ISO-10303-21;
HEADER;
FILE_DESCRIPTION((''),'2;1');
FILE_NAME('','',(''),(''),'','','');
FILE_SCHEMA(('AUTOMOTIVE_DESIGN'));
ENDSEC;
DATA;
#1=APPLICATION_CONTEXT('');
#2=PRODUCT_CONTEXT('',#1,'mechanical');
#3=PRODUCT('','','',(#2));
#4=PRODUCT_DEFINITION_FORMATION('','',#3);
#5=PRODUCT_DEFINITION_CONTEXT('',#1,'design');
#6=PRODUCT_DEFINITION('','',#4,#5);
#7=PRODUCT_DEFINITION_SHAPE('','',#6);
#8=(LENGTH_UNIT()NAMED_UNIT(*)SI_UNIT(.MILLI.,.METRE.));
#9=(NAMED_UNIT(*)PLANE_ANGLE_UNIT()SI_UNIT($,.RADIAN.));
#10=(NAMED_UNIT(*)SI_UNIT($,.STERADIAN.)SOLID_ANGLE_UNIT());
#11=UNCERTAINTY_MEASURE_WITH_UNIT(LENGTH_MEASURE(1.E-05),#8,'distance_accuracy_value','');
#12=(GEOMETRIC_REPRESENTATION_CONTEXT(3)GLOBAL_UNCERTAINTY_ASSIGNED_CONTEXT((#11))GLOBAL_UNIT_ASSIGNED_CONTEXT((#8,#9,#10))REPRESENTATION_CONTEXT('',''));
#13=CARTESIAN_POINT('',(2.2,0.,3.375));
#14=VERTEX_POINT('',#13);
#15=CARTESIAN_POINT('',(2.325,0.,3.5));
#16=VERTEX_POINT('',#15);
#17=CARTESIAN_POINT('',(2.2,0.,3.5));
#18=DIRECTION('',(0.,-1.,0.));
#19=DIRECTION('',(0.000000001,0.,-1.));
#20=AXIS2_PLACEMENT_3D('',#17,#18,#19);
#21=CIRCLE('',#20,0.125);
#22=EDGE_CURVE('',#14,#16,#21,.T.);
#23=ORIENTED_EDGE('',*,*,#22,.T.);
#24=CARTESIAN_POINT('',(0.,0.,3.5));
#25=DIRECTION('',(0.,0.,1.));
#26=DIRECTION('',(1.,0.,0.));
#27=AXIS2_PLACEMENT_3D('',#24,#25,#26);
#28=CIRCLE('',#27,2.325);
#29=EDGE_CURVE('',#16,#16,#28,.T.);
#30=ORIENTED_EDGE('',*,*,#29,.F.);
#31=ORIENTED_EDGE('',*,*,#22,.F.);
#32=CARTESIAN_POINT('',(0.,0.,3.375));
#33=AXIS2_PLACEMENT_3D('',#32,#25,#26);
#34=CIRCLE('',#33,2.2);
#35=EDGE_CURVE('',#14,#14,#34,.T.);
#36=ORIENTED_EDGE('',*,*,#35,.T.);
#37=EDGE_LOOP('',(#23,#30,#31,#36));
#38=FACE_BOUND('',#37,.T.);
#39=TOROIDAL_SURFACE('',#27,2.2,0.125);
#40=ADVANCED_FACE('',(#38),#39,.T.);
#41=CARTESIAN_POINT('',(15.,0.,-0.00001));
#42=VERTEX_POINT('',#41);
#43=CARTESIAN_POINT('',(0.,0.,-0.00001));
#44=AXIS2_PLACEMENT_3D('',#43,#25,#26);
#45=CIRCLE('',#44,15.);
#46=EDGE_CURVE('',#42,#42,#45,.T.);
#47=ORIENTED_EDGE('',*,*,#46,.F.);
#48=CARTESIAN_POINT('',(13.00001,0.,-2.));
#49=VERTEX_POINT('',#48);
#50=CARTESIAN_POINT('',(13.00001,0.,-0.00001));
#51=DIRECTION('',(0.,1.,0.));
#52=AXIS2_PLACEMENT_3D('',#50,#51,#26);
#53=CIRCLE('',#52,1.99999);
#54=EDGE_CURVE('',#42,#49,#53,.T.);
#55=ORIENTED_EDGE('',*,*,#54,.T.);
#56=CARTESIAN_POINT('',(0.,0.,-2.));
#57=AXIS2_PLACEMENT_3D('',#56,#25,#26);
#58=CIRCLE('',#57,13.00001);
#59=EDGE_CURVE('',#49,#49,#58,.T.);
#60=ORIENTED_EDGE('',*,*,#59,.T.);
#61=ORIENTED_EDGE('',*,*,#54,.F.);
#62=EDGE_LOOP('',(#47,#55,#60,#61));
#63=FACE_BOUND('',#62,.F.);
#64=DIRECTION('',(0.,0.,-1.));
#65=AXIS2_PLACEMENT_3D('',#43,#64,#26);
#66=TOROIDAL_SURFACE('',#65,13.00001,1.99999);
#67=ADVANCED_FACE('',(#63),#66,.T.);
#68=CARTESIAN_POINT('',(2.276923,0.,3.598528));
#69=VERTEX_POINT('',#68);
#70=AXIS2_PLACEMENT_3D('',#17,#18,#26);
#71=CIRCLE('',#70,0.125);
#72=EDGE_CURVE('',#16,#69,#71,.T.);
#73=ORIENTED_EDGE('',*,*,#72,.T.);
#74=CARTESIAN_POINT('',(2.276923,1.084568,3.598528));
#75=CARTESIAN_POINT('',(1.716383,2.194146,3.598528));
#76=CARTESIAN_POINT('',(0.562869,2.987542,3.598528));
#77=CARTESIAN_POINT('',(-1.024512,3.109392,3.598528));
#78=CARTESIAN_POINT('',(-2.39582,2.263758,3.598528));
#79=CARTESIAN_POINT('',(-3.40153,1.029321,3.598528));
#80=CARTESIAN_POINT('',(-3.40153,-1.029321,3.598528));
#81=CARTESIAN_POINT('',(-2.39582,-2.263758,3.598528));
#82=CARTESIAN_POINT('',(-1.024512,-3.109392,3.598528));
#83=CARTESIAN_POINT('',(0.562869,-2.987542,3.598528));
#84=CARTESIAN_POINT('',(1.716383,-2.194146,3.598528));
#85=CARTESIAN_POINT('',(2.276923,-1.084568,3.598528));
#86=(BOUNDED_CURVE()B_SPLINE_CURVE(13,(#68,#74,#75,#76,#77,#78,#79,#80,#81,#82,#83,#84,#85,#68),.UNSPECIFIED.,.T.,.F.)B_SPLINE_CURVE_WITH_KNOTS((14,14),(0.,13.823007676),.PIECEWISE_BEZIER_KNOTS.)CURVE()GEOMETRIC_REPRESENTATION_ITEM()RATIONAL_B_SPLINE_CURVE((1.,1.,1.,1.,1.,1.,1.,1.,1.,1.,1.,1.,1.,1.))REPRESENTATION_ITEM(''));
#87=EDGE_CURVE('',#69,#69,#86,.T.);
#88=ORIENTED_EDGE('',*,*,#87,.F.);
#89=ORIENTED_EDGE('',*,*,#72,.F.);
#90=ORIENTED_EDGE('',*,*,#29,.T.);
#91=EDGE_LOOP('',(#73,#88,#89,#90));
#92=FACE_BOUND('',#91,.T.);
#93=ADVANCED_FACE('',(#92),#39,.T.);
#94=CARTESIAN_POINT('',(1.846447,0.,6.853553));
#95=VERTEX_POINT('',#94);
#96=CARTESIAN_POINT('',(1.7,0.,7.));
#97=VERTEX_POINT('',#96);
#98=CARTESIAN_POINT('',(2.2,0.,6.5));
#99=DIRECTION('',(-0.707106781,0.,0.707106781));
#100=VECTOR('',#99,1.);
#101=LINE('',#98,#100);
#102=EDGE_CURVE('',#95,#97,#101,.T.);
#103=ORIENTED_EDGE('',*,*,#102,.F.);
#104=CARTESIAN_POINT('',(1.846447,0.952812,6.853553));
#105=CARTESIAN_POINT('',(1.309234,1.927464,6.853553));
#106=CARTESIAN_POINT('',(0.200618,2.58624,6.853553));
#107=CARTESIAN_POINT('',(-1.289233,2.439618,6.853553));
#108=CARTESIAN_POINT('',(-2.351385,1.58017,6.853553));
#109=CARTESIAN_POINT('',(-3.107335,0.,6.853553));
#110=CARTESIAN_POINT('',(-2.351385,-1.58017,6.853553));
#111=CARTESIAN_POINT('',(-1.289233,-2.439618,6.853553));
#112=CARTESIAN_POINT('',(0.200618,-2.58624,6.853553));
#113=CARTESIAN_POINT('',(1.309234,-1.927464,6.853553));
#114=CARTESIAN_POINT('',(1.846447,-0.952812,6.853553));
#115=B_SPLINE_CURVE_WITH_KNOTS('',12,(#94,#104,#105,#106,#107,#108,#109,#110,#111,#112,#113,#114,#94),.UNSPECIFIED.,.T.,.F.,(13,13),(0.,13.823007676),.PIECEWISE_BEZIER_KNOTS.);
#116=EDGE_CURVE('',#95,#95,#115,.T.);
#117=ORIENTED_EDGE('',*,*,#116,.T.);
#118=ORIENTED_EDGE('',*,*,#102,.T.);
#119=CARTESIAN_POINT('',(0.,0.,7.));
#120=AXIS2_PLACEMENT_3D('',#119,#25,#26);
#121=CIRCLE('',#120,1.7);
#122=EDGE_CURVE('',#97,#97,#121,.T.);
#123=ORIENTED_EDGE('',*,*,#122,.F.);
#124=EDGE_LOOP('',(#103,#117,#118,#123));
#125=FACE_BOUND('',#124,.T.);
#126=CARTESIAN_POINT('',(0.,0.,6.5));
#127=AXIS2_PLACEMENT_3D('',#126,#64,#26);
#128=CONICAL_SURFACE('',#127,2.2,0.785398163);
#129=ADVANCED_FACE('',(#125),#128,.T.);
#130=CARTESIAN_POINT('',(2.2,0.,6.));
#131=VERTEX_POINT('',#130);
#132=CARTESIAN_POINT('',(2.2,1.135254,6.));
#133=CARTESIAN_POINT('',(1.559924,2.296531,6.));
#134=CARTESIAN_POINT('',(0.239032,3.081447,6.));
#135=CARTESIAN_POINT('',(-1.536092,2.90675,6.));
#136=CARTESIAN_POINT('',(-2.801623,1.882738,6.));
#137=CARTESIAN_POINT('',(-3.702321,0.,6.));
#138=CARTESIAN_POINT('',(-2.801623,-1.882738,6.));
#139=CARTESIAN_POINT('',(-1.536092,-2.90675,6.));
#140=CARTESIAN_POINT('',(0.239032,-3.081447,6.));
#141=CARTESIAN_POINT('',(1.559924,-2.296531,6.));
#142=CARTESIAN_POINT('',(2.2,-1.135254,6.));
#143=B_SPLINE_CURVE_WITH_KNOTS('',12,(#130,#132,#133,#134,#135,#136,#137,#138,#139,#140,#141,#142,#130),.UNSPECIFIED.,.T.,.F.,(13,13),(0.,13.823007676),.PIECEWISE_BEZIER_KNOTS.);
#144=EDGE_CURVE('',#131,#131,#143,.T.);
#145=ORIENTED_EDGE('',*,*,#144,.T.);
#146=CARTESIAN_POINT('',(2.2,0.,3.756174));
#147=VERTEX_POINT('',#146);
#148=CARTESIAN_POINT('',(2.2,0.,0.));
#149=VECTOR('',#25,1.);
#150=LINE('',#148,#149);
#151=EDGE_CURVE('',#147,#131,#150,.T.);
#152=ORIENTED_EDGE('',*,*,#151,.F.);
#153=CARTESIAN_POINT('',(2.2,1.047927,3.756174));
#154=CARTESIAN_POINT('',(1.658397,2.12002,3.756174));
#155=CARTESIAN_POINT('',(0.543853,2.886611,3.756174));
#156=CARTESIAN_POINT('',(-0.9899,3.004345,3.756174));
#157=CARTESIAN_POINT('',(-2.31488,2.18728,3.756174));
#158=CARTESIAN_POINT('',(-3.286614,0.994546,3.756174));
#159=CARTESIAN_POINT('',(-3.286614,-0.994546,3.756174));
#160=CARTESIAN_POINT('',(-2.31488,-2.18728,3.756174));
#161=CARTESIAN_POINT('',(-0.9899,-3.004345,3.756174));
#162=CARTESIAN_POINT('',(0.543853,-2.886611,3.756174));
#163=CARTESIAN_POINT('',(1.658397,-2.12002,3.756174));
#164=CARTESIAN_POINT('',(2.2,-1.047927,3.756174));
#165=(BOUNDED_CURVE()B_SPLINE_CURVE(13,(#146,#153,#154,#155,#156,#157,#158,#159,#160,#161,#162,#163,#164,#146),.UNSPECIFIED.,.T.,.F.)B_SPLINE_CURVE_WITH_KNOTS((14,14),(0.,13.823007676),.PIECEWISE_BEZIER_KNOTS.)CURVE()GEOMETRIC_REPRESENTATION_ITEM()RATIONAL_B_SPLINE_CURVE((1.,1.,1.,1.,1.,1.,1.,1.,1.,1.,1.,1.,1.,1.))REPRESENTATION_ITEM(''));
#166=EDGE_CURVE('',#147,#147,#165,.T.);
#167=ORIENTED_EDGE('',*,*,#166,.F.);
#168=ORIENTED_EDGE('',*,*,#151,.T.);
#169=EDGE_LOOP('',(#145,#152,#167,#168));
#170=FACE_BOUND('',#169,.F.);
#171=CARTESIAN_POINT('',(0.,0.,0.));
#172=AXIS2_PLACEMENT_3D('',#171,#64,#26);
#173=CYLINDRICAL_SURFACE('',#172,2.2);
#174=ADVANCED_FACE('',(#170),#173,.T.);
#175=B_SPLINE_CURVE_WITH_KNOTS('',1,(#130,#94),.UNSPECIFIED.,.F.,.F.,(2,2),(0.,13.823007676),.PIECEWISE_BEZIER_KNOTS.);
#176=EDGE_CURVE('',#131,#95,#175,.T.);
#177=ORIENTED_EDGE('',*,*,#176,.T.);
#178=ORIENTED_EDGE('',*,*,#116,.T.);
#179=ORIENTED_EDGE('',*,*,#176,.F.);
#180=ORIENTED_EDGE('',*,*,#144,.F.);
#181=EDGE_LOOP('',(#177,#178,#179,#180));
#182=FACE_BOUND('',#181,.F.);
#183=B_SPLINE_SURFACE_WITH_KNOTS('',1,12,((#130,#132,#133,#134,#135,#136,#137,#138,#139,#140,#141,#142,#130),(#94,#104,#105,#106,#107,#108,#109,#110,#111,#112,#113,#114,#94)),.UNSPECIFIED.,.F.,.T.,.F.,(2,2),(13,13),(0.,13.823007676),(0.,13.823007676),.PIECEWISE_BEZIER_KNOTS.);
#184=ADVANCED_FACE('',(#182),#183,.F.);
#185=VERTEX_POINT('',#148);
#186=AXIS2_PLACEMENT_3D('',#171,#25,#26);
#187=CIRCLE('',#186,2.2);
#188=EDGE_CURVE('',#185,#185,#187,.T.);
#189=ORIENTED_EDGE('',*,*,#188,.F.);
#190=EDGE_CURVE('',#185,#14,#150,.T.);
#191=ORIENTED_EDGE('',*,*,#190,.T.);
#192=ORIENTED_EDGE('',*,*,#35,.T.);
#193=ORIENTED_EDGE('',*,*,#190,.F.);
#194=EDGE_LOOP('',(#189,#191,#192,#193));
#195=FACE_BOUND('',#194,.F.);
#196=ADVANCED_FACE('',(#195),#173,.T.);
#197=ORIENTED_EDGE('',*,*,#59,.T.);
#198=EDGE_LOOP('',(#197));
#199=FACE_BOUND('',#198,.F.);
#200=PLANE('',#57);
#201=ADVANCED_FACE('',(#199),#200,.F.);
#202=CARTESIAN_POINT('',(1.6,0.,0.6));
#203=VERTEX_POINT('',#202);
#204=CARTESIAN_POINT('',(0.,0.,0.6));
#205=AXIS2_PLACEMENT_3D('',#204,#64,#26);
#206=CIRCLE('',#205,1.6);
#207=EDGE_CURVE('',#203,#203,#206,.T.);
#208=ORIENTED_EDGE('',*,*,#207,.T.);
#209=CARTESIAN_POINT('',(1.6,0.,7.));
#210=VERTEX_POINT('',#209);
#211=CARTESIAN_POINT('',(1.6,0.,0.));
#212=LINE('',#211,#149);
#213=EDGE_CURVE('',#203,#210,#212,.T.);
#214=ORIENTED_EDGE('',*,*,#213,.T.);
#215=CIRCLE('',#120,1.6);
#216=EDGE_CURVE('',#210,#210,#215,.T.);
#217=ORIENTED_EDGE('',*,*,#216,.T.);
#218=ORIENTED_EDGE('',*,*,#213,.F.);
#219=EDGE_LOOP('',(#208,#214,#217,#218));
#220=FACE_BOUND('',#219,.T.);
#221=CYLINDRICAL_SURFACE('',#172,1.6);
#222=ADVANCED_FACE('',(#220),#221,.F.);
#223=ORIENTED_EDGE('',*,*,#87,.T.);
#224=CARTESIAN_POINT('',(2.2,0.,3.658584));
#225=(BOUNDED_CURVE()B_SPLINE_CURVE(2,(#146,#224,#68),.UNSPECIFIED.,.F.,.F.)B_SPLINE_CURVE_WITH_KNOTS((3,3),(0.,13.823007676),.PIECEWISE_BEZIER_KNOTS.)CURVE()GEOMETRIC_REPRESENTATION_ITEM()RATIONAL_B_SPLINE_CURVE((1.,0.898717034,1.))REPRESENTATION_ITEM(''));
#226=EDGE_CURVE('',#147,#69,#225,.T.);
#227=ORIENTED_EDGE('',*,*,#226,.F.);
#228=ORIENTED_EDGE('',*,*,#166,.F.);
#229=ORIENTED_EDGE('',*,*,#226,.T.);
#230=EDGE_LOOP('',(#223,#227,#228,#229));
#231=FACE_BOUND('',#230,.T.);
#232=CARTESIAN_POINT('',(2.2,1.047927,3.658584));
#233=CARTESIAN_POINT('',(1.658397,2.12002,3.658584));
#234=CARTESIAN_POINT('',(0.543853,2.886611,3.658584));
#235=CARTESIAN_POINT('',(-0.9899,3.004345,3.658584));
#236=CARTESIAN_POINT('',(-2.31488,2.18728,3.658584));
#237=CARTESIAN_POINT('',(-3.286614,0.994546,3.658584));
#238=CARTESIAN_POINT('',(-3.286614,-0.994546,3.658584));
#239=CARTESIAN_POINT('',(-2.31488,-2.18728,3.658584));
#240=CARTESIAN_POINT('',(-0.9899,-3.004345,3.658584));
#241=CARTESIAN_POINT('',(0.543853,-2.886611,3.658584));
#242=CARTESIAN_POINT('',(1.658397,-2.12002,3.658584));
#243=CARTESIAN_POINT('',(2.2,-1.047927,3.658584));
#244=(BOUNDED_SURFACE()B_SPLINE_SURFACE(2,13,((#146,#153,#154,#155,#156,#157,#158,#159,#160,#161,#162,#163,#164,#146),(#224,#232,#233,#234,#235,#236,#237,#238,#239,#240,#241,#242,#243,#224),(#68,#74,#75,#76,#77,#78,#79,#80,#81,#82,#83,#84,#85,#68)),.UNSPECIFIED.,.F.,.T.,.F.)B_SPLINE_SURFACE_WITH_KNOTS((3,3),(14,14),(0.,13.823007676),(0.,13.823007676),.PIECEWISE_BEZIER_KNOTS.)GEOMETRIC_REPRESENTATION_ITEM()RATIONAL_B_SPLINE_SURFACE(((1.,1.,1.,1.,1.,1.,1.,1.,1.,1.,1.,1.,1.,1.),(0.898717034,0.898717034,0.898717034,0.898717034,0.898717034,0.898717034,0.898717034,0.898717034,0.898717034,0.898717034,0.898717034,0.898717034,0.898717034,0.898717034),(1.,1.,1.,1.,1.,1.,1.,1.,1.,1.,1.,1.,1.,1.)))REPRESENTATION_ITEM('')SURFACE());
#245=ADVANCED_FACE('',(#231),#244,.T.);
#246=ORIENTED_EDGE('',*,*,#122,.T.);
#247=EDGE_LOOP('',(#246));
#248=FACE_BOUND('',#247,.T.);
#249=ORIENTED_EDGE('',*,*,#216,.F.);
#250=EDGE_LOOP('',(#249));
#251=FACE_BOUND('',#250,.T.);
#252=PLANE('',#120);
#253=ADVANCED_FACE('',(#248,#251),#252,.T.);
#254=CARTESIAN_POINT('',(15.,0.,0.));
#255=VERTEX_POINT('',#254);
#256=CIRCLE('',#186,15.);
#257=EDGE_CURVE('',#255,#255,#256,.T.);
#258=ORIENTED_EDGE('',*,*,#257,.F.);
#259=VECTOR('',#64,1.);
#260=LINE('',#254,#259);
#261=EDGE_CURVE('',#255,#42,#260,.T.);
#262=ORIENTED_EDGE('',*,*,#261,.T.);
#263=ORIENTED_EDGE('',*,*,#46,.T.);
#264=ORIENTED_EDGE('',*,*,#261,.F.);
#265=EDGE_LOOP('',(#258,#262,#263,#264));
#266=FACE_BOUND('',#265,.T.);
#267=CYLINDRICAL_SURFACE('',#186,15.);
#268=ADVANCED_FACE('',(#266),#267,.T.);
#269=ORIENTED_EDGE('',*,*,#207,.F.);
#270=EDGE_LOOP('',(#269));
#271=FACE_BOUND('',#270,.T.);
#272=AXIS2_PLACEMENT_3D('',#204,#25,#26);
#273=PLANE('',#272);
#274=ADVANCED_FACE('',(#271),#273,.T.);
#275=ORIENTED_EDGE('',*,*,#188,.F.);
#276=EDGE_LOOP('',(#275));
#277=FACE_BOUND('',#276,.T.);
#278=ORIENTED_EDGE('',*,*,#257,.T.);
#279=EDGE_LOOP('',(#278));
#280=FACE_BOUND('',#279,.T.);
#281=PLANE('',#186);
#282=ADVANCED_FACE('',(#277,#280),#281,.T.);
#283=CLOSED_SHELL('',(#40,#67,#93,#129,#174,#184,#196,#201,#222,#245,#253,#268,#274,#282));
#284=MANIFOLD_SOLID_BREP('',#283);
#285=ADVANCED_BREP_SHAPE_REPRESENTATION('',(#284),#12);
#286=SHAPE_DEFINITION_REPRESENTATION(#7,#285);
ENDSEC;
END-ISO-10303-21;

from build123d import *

# Parameters (mm, degrees)
F0_R     = 2.2
F1_DEPTH = 7
F2_T     = -0.6
F0_R_2   = 15
F3_DEPTH = 2
F4_R     = 1.99999
F7_SIZE  = 0.5
F8_SIZE  = 0.5
F9_R     = 0.2


# Not quite as in the source:
# - a fillet or chamfer is up to 0.001 mm smaller than in the source, because OpenCascade refuses the exact size


with BuildPart() as f1:
    # F0 (on Top) → F1 (new body)
    with BuildSketch(Plane.XY):
        Circle(F0_R)
    extrude(amount=F1_DEPTH)

    # F2
    f2_openings = [f1.faces().sort_by_distance(p)[0] for p in [
        (0, 0, 7),
    ]]
    offset(amount=F2_T, openings=f2_openings)

    # F0 (on Top) → F3 (join)
    with BuildSketch(Plane.XY):
        Circle(F0_R_2)
        Circle(F0_R, mode=Mode.SUBTRACT)
        Circle(F0_R)
    extrude(amount=-F3_DEPTH)

    # F4 (radius 2 in the source; OpenCascade refuses exactly that, so slightly less here)
    f4_edges = [f1.edges().sort_by_distance(p)[0] for p in [
        (-15, 0, -2),
    ]]
    fillet(f4_edges, radius=F4_R)

    # F5 (on Front) → F6 (revolve)
    with BuildSketch(Plane.XZ):
        with BuildLine():
            ThreePointArc((2.075, 3.5), (2.1116116524, 3.4116116524), (2.2, 3.375))
            Line((2.2, 3.375), (2.2, 3.5))
            Line((2.2, 3.5), (2.075, 3.5))
        make_face()
        with BuildLine():
            Line((2.2, 3.5), (2.2, 3.375))
            ThreePointArc((2.2, 3.375), (2.2883883476, 3.4116116524), (2.325, 3.5))
            ThreePointArc((2.325, 3.5), (2.2, 3.625), (2.075, 3.5))
            Line((2.075, 3.5), (2.2, 3.5))
        make_face()
    revolve(axis=Axis((0, 0, 1.75), (0, 0, 1)))

    # F7
    f7_edges = [f1.edges().sort_by_distance(p)[0] for p in [
        (-2.2, 0, 7),
    ]]
    chamfer(f7_edges, length=F7_SIZE)

    # F8
    f8_edges = [f1.edges().sort_by_distance(p)[0] for p in [
        (-2.2, 0, 6.5),
    ]]
    chamfer(f8_edges, length=F8_SIZE)

    # F9
    f9_edges = [f1.edges().sort_by_distance(p)[0] for p in [
        (-2.2, 0, 3.625),
    ]]
    fillet(f9_edges, radius=F9_R)


solid = f1.part
